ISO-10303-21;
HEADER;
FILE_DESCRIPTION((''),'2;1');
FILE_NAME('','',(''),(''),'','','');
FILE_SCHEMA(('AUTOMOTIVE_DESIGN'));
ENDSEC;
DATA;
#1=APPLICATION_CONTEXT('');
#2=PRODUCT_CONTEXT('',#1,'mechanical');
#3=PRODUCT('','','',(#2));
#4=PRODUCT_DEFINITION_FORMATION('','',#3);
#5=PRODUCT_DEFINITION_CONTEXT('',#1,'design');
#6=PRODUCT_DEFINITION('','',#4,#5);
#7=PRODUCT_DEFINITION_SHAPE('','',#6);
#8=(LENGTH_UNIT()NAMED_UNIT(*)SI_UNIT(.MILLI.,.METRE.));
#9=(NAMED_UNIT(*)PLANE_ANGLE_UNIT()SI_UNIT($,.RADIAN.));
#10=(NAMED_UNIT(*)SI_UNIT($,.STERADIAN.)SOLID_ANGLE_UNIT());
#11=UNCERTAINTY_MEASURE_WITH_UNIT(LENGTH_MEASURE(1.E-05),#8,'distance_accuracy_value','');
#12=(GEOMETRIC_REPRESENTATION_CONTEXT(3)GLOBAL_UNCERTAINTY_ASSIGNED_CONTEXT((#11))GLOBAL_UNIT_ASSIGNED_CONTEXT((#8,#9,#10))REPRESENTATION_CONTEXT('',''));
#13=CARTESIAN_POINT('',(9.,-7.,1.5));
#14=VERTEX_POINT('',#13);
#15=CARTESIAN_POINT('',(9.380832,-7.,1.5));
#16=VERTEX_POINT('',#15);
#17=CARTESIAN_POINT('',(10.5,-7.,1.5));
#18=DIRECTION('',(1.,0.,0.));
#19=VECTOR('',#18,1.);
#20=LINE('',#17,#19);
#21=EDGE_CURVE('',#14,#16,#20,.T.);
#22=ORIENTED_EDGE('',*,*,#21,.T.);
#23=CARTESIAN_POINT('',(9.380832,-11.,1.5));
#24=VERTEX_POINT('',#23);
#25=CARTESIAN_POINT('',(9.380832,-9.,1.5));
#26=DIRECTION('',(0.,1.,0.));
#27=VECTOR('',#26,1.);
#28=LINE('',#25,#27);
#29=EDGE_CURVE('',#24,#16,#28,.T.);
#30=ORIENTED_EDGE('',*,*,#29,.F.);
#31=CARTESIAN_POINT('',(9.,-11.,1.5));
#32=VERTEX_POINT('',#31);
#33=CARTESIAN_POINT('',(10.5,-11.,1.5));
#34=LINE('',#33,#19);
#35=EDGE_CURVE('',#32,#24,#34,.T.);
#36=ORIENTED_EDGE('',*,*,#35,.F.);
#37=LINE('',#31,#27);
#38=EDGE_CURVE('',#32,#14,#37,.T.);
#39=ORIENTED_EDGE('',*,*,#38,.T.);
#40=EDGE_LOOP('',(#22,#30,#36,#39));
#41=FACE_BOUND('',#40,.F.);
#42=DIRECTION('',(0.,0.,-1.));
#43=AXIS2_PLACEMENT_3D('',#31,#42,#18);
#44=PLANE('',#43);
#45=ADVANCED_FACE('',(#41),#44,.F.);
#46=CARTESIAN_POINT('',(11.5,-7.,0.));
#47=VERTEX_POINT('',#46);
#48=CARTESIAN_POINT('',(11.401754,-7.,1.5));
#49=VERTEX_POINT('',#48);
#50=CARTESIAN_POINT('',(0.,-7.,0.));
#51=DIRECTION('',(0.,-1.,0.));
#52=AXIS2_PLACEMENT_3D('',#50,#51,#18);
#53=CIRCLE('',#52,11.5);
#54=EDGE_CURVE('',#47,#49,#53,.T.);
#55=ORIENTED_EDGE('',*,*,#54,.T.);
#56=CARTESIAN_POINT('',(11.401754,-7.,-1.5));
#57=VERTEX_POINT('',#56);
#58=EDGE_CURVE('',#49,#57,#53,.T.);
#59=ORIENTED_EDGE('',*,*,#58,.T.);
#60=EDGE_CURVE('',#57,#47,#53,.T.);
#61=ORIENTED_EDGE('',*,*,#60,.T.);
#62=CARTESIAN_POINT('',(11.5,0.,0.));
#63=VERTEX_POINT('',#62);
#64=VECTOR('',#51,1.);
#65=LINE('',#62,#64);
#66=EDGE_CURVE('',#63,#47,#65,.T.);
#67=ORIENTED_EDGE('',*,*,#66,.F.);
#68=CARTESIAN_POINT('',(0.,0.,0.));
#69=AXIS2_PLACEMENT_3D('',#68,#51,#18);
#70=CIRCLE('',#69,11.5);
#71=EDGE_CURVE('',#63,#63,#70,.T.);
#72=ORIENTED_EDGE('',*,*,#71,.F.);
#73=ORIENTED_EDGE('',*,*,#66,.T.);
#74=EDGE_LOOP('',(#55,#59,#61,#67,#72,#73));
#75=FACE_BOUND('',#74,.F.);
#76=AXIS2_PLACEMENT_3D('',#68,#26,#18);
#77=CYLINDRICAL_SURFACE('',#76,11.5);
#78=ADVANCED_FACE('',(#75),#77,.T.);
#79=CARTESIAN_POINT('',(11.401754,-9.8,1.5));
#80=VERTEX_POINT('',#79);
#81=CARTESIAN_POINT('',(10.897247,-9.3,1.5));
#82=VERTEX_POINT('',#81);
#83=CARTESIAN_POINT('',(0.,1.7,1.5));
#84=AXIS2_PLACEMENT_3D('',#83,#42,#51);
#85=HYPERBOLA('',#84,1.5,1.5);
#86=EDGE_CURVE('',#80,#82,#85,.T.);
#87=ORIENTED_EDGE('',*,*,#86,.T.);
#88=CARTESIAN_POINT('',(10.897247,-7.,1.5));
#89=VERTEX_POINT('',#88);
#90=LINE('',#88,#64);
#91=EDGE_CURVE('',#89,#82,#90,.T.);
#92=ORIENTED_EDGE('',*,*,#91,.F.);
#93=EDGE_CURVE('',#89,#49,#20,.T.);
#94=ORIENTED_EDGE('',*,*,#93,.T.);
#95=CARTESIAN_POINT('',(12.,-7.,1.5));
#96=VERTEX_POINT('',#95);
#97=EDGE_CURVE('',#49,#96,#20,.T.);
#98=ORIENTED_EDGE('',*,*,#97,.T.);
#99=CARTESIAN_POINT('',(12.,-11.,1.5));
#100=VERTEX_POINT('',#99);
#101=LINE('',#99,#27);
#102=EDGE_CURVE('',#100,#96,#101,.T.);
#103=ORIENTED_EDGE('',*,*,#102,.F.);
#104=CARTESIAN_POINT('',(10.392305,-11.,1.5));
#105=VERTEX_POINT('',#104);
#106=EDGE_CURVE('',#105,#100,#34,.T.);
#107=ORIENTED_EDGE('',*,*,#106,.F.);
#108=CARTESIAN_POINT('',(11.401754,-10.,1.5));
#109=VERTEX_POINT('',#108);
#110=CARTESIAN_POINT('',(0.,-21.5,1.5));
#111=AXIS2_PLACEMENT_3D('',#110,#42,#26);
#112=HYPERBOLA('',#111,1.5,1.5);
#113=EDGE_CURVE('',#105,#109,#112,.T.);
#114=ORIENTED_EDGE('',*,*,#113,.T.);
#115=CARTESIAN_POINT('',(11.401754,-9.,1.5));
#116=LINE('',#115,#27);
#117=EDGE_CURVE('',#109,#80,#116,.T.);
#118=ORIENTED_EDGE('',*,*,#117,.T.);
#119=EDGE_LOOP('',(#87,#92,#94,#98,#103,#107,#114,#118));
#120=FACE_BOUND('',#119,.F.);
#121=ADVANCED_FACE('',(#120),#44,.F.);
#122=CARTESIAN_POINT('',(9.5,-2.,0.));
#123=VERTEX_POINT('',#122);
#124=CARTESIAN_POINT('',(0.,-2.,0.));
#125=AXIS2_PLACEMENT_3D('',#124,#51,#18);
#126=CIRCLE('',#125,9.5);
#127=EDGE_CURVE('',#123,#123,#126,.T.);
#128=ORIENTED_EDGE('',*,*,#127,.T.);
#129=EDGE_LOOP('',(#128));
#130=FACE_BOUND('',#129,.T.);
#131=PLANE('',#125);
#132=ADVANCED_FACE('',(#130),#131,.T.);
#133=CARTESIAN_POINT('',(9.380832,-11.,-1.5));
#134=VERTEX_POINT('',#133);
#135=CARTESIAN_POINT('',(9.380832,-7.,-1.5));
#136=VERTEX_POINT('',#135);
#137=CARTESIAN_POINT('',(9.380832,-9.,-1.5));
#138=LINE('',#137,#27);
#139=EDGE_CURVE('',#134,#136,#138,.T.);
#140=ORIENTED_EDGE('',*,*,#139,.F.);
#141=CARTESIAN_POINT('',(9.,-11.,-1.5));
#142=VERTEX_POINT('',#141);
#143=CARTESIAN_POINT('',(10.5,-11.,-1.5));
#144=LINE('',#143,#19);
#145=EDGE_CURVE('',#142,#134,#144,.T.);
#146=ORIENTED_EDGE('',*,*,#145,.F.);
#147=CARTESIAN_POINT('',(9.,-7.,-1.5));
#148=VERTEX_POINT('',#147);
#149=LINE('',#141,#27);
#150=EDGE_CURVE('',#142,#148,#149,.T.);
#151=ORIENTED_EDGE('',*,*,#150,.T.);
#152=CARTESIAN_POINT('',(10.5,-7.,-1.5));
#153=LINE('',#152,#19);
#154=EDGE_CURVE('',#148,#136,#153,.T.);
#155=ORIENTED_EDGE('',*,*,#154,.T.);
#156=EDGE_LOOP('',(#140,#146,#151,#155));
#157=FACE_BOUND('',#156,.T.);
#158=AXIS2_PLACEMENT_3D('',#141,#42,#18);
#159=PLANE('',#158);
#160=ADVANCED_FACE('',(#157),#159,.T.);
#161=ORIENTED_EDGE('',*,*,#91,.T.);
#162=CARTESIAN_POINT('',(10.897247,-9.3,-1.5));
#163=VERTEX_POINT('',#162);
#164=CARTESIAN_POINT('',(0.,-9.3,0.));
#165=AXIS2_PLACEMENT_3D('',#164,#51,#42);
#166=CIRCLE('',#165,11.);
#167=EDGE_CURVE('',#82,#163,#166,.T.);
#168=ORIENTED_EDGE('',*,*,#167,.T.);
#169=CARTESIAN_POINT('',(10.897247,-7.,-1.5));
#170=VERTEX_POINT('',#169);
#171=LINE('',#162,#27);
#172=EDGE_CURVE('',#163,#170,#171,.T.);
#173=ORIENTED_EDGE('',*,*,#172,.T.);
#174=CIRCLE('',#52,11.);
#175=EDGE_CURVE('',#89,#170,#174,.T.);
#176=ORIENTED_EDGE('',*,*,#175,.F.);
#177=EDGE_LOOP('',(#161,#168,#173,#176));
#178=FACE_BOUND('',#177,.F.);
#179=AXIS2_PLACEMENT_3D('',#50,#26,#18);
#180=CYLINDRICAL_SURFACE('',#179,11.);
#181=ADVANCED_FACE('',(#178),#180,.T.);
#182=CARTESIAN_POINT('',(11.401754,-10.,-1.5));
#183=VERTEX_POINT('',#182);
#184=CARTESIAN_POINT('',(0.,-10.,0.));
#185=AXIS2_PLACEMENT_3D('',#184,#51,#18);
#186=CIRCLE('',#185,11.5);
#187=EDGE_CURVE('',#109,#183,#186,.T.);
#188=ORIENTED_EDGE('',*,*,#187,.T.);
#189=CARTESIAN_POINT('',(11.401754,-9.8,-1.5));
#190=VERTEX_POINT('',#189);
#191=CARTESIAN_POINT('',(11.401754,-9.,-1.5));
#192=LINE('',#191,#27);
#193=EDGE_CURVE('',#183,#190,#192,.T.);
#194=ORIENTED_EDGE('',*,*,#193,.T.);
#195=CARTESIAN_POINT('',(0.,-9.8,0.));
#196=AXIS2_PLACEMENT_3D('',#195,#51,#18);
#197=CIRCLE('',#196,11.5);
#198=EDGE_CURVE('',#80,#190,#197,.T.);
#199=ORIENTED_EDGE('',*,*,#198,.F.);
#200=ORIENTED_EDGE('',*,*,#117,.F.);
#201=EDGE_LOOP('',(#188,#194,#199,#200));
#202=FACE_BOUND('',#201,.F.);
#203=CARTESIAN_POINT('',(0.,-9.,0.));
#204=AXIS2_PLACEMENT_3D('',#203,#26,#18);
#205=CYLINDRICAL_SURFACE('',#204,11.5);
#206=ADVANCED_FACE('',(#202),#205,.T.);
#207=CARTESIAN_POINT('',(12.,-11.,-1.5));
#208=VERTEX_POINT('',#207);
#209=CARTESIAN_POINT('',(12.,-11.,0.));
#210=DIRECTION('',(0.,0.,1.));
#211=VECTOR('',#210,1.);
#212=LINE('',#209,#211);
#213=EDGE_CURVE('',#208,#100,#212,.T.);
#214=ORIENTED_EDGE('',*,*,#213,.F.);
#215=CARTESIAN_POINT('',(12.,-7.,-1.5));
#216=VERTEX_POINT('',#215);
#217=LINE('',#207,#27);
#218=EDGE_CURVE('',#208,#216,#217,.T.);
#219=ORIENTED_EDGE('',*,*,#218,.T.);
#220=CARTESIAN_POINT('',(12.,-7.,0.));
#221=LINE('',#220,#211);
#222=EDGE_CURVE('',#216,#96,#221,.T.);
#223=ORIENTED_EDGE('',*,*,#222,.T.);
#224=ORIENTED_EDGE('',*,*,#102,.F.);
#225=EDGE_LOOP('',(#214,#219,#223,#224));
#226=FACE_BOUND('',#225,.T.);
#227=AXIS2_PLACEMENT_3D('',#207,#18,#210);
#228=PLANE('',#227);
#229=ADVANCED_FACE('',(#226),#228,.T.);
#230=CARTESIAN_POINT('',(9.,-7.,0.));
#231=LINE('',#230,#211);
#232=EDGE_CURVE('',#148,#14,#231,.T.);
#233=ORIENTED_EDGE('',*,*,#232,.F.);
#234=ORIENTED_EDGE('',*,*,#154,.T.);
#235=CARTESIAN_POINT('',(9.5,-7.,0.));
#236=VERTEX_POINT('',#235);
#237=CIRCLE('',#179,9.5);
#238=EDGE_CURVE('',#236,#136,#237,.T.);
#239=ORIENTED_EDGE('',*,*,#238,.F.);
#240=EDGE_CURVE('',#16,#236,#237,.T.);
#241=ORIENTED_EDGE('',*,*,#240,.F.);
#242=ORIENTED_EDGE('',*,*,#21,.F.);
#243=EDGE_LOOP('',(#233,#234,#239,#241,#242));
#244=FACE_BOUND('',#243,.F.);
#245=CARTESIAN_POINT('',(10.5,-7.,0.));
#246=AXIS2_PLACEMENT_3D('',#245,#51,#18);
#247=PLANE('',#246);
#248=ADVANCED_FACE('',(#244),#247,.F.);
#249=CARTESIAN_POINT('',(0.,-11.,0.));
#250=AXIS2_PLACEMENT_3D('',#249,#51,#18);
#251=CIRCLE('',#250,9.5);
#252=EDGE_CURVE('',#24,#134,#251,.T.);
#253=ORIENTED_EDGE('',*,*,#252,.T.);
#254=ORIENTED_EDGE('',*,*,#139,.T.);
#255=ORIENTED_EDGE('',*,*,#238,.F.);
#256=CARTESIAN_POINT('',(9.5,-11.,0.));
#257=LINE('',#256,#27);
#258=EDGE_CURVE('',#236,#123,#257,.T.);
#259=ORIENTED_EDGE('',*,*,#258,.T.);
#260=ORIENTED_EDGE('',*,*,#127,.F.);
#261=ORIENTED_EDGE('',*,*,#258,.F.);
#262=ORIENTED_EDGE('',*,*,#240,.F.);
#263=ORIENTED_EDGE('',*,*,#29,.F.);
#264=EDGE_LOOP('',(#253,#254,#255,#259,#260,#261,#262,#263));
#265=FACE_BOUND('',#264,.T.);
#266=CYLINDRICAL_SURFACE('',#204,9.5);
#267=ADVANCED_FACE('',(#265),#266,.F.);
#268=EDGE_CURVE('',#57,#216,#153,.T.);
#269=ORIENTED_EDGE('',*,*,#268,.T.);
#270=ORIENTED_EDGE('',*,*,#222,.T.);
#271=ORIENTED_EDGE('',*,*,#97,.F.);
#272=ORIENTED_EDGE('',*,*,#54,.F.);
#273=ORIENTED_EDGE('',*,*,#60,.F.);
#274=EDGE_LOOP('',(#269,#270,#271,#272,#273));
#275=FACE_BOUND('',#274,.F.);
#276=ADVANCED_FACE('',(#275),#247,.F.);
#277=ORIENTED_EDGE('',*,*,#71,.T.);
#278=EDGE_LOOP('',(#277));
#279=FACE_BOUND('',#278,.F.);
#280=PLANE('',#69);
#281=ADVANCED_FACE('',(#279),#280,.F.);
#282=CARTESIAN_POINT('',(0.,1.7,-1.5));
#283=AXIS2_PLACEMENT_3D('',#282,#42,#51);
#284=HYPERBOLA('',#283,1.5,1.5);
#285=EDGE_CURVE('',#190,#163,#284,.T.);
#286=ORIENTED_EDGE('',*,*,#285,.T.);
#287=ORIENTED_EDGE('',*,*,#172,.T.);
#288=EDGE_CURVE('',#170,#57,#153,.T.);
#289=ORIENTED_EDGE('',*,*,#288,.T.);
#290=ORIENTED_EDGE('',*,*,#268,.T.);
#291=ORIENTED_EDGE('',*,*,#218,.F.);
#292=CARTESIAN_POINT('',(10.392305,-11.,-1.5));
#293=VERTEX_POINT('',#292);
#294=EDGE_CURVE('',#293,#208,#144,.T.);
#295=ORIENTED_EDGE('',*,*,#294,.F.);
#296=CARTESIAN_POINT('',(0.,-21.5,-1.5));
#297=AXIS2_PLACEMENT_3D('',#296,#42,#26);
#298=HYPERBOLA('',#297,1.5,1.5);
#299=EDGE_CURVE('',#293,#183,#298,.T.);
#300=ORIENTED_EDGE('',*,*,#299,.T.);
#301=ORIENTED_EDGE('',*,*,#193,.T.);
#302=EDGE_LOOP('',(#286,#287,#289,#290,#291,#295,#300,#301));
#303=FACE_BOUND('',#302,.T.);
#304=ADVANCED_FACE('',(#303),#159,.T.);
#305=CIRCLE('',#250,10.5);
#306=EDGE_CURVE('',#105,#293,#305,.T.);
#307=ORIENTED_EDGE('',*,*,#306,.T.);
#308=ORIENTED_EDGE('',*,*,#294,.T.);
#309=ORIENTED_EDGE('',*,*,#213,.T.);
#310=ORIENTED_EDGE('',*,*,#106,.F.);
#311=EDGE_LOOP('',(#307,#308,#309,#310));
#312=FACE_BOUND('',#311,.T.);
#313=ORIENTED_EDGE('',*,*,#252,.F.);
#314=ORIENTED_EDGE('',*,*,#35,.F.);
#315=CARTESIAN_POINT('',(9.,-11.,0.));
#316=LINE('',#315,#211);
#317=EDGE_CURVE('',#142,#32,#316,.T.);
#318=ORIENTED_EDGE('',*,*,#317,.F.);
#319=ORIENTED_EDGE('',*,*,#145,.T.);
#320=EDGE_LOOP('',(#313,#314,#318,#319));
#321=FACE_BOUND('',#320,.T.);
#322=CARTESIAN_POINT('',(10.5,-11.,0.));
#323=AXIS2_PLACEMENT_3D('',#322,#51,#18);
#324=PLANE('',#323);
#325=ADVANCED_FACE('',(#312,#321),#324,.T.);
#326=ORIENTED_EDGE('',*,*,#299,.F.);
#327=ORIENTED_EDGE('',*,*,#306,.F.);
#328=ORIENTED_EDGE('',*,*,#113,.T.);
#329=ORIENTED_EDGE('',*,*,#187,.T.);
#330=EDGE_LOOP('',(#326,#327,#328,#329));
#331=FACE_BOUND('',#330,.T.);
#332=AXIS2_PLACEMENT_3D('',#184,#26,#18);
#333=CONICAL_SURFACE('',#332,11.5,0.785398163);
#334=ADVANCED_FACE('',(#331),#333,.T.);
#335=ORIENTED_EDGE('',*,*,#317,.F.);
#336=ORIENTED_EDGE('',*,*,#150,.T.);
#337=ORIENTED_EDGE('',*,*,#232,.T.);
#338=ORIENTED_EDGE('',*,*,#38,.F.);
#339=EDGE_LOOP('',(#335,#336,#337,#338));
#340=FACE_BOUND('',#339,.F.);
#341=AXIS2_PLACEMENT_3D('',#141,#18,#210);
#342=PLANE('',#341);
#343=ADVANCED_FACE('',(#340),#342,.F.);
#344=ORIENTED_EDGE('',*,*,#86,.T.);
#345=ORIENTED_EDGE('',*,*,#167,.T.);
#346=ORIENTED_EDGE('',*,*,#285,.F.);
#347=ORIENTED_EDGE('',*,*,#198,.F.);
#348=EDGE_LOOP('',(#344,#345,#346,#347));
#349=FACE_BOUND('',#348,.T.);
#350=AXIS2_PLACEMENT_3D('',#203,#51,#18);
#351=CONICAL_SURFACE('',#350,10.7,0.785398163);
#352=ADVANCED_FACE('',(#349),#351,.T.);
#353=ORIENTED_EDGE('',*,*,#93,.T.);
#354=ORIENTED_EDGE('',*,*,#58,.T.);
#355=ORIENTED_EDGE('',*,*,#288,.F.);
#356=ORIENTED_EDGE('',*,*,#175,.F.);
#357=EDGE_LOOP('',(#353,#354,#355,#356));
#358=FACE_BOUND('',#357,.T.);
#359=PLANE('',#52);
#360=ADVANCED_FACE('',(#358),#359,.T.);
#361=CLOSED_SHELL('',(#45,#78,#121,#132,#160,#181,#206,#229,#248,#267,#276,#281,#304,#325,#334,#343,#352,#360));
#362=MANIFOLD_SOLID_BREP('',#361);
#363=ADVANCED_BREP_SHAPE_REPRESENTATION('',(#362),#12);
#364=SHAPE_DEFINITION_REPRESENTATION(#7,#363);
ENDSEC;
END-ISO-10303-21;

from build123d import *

# Parameters (mm, degrees)
F0_R        = 11.5
F0_R_2      = 9.5
F1_DEPTH    = 7
F2_DEPTH    = 2
F3_R        = 11
F3_R_2      = 9.5
F4_DEPTH    = 2
F5_R        = 11.5
F5_R_2      = 11
F5_R_3      = 9.5
F6_DEPTH    = 2
F7_S5_R     = 11
F7_T6_DEPTH = 18
F8_SIZE     = 1
F9_W        = 3
F9_H        = 3
F10_DEPTH   = 4


# Not quite as in the source:
# - a fillet or chamfer that OpenCascade refuses, or shapes differently, is made with other operations: its cross-section is extruded or revolved along the edge and cut away or added


with BuildPart() as f1:
    # F0 (on Front) → F1 (new body)
    with BuildSketch(Plane.XZ):
        Circle(F0_R)
        Circle(F0_R_2, mode=Mode.SUBTRACT)
    extrude(amount=F1_DEPTH)

    # F0 (on Front) → F2 (join)
    with BuildSketch(Plane.XZ):
        Circle(F0_R_2)
    extrude(amount=F2_DEPTH)

    # F3 (on face) → F4 (join)
    with BuildSketch(Plane.XZ.offset(7)):
        Circle(F3_R)
        Circle(F3_R_2, mode=Mode.SUBTRACT)
    extrude(amount=F4_DEPTH)

    # F5 (on face) → F6 (join)
    with BuildSketch(Plane.XZ.offset(9)):
        Circle(F5_R)
        Circle(F5_R_2, mode=Mode.SUBTRACT)
        Circle(F5_R_2)
        Circle(F5_R_3, mode=Mode.SUBTRACT)
    extrude(amount=F6_DEPTH)

    # F7: chamfer of 0.8 on 1 edges, made by hand


with BuildPart() as f7_tool2:
    # F7_s3 → F7_t4 (revolve)
    with BuildSketch(Plane.XY):
        Polygon((10.7, -9), (11.5, -9.8), (11.5, -9), align=None)
    revolve(axis=Axis((0, -9, 0), (0, -1, 0)))

    # F7_s5 → F7_t6 (cut, symmetric)
    with BuildSketch(Plane.XZ.offset(9.4)):
        Circle(F7_S5_R)
    extrude(amount=F7_T6_DEPTH, both=True, mode=Mode.SUBTRACT)


with BuildPart() as f1_1:
    add(f1.part)

    # F7_t1: cut F7_tool2
    add(f7_tool2.part, mode=Mode.SUBTRACT)

    # F8
    f8_edges = [f1_1.edges().sort_by_distance(p)[0] for p in [
        (-11.5, -11, 0),
    ]]
    chamfer(f8_edges, length=F8_SIZE)

    # F9 (on face) → F10 (join)
    with BuildSketch(Plane.XZ.offset(11)):
        with Locations((10.5, 0)):
            Rectangle(F9_W, F9_H)
    extrude(amount=-F10_DEPTH)


solid = f1_1.part
